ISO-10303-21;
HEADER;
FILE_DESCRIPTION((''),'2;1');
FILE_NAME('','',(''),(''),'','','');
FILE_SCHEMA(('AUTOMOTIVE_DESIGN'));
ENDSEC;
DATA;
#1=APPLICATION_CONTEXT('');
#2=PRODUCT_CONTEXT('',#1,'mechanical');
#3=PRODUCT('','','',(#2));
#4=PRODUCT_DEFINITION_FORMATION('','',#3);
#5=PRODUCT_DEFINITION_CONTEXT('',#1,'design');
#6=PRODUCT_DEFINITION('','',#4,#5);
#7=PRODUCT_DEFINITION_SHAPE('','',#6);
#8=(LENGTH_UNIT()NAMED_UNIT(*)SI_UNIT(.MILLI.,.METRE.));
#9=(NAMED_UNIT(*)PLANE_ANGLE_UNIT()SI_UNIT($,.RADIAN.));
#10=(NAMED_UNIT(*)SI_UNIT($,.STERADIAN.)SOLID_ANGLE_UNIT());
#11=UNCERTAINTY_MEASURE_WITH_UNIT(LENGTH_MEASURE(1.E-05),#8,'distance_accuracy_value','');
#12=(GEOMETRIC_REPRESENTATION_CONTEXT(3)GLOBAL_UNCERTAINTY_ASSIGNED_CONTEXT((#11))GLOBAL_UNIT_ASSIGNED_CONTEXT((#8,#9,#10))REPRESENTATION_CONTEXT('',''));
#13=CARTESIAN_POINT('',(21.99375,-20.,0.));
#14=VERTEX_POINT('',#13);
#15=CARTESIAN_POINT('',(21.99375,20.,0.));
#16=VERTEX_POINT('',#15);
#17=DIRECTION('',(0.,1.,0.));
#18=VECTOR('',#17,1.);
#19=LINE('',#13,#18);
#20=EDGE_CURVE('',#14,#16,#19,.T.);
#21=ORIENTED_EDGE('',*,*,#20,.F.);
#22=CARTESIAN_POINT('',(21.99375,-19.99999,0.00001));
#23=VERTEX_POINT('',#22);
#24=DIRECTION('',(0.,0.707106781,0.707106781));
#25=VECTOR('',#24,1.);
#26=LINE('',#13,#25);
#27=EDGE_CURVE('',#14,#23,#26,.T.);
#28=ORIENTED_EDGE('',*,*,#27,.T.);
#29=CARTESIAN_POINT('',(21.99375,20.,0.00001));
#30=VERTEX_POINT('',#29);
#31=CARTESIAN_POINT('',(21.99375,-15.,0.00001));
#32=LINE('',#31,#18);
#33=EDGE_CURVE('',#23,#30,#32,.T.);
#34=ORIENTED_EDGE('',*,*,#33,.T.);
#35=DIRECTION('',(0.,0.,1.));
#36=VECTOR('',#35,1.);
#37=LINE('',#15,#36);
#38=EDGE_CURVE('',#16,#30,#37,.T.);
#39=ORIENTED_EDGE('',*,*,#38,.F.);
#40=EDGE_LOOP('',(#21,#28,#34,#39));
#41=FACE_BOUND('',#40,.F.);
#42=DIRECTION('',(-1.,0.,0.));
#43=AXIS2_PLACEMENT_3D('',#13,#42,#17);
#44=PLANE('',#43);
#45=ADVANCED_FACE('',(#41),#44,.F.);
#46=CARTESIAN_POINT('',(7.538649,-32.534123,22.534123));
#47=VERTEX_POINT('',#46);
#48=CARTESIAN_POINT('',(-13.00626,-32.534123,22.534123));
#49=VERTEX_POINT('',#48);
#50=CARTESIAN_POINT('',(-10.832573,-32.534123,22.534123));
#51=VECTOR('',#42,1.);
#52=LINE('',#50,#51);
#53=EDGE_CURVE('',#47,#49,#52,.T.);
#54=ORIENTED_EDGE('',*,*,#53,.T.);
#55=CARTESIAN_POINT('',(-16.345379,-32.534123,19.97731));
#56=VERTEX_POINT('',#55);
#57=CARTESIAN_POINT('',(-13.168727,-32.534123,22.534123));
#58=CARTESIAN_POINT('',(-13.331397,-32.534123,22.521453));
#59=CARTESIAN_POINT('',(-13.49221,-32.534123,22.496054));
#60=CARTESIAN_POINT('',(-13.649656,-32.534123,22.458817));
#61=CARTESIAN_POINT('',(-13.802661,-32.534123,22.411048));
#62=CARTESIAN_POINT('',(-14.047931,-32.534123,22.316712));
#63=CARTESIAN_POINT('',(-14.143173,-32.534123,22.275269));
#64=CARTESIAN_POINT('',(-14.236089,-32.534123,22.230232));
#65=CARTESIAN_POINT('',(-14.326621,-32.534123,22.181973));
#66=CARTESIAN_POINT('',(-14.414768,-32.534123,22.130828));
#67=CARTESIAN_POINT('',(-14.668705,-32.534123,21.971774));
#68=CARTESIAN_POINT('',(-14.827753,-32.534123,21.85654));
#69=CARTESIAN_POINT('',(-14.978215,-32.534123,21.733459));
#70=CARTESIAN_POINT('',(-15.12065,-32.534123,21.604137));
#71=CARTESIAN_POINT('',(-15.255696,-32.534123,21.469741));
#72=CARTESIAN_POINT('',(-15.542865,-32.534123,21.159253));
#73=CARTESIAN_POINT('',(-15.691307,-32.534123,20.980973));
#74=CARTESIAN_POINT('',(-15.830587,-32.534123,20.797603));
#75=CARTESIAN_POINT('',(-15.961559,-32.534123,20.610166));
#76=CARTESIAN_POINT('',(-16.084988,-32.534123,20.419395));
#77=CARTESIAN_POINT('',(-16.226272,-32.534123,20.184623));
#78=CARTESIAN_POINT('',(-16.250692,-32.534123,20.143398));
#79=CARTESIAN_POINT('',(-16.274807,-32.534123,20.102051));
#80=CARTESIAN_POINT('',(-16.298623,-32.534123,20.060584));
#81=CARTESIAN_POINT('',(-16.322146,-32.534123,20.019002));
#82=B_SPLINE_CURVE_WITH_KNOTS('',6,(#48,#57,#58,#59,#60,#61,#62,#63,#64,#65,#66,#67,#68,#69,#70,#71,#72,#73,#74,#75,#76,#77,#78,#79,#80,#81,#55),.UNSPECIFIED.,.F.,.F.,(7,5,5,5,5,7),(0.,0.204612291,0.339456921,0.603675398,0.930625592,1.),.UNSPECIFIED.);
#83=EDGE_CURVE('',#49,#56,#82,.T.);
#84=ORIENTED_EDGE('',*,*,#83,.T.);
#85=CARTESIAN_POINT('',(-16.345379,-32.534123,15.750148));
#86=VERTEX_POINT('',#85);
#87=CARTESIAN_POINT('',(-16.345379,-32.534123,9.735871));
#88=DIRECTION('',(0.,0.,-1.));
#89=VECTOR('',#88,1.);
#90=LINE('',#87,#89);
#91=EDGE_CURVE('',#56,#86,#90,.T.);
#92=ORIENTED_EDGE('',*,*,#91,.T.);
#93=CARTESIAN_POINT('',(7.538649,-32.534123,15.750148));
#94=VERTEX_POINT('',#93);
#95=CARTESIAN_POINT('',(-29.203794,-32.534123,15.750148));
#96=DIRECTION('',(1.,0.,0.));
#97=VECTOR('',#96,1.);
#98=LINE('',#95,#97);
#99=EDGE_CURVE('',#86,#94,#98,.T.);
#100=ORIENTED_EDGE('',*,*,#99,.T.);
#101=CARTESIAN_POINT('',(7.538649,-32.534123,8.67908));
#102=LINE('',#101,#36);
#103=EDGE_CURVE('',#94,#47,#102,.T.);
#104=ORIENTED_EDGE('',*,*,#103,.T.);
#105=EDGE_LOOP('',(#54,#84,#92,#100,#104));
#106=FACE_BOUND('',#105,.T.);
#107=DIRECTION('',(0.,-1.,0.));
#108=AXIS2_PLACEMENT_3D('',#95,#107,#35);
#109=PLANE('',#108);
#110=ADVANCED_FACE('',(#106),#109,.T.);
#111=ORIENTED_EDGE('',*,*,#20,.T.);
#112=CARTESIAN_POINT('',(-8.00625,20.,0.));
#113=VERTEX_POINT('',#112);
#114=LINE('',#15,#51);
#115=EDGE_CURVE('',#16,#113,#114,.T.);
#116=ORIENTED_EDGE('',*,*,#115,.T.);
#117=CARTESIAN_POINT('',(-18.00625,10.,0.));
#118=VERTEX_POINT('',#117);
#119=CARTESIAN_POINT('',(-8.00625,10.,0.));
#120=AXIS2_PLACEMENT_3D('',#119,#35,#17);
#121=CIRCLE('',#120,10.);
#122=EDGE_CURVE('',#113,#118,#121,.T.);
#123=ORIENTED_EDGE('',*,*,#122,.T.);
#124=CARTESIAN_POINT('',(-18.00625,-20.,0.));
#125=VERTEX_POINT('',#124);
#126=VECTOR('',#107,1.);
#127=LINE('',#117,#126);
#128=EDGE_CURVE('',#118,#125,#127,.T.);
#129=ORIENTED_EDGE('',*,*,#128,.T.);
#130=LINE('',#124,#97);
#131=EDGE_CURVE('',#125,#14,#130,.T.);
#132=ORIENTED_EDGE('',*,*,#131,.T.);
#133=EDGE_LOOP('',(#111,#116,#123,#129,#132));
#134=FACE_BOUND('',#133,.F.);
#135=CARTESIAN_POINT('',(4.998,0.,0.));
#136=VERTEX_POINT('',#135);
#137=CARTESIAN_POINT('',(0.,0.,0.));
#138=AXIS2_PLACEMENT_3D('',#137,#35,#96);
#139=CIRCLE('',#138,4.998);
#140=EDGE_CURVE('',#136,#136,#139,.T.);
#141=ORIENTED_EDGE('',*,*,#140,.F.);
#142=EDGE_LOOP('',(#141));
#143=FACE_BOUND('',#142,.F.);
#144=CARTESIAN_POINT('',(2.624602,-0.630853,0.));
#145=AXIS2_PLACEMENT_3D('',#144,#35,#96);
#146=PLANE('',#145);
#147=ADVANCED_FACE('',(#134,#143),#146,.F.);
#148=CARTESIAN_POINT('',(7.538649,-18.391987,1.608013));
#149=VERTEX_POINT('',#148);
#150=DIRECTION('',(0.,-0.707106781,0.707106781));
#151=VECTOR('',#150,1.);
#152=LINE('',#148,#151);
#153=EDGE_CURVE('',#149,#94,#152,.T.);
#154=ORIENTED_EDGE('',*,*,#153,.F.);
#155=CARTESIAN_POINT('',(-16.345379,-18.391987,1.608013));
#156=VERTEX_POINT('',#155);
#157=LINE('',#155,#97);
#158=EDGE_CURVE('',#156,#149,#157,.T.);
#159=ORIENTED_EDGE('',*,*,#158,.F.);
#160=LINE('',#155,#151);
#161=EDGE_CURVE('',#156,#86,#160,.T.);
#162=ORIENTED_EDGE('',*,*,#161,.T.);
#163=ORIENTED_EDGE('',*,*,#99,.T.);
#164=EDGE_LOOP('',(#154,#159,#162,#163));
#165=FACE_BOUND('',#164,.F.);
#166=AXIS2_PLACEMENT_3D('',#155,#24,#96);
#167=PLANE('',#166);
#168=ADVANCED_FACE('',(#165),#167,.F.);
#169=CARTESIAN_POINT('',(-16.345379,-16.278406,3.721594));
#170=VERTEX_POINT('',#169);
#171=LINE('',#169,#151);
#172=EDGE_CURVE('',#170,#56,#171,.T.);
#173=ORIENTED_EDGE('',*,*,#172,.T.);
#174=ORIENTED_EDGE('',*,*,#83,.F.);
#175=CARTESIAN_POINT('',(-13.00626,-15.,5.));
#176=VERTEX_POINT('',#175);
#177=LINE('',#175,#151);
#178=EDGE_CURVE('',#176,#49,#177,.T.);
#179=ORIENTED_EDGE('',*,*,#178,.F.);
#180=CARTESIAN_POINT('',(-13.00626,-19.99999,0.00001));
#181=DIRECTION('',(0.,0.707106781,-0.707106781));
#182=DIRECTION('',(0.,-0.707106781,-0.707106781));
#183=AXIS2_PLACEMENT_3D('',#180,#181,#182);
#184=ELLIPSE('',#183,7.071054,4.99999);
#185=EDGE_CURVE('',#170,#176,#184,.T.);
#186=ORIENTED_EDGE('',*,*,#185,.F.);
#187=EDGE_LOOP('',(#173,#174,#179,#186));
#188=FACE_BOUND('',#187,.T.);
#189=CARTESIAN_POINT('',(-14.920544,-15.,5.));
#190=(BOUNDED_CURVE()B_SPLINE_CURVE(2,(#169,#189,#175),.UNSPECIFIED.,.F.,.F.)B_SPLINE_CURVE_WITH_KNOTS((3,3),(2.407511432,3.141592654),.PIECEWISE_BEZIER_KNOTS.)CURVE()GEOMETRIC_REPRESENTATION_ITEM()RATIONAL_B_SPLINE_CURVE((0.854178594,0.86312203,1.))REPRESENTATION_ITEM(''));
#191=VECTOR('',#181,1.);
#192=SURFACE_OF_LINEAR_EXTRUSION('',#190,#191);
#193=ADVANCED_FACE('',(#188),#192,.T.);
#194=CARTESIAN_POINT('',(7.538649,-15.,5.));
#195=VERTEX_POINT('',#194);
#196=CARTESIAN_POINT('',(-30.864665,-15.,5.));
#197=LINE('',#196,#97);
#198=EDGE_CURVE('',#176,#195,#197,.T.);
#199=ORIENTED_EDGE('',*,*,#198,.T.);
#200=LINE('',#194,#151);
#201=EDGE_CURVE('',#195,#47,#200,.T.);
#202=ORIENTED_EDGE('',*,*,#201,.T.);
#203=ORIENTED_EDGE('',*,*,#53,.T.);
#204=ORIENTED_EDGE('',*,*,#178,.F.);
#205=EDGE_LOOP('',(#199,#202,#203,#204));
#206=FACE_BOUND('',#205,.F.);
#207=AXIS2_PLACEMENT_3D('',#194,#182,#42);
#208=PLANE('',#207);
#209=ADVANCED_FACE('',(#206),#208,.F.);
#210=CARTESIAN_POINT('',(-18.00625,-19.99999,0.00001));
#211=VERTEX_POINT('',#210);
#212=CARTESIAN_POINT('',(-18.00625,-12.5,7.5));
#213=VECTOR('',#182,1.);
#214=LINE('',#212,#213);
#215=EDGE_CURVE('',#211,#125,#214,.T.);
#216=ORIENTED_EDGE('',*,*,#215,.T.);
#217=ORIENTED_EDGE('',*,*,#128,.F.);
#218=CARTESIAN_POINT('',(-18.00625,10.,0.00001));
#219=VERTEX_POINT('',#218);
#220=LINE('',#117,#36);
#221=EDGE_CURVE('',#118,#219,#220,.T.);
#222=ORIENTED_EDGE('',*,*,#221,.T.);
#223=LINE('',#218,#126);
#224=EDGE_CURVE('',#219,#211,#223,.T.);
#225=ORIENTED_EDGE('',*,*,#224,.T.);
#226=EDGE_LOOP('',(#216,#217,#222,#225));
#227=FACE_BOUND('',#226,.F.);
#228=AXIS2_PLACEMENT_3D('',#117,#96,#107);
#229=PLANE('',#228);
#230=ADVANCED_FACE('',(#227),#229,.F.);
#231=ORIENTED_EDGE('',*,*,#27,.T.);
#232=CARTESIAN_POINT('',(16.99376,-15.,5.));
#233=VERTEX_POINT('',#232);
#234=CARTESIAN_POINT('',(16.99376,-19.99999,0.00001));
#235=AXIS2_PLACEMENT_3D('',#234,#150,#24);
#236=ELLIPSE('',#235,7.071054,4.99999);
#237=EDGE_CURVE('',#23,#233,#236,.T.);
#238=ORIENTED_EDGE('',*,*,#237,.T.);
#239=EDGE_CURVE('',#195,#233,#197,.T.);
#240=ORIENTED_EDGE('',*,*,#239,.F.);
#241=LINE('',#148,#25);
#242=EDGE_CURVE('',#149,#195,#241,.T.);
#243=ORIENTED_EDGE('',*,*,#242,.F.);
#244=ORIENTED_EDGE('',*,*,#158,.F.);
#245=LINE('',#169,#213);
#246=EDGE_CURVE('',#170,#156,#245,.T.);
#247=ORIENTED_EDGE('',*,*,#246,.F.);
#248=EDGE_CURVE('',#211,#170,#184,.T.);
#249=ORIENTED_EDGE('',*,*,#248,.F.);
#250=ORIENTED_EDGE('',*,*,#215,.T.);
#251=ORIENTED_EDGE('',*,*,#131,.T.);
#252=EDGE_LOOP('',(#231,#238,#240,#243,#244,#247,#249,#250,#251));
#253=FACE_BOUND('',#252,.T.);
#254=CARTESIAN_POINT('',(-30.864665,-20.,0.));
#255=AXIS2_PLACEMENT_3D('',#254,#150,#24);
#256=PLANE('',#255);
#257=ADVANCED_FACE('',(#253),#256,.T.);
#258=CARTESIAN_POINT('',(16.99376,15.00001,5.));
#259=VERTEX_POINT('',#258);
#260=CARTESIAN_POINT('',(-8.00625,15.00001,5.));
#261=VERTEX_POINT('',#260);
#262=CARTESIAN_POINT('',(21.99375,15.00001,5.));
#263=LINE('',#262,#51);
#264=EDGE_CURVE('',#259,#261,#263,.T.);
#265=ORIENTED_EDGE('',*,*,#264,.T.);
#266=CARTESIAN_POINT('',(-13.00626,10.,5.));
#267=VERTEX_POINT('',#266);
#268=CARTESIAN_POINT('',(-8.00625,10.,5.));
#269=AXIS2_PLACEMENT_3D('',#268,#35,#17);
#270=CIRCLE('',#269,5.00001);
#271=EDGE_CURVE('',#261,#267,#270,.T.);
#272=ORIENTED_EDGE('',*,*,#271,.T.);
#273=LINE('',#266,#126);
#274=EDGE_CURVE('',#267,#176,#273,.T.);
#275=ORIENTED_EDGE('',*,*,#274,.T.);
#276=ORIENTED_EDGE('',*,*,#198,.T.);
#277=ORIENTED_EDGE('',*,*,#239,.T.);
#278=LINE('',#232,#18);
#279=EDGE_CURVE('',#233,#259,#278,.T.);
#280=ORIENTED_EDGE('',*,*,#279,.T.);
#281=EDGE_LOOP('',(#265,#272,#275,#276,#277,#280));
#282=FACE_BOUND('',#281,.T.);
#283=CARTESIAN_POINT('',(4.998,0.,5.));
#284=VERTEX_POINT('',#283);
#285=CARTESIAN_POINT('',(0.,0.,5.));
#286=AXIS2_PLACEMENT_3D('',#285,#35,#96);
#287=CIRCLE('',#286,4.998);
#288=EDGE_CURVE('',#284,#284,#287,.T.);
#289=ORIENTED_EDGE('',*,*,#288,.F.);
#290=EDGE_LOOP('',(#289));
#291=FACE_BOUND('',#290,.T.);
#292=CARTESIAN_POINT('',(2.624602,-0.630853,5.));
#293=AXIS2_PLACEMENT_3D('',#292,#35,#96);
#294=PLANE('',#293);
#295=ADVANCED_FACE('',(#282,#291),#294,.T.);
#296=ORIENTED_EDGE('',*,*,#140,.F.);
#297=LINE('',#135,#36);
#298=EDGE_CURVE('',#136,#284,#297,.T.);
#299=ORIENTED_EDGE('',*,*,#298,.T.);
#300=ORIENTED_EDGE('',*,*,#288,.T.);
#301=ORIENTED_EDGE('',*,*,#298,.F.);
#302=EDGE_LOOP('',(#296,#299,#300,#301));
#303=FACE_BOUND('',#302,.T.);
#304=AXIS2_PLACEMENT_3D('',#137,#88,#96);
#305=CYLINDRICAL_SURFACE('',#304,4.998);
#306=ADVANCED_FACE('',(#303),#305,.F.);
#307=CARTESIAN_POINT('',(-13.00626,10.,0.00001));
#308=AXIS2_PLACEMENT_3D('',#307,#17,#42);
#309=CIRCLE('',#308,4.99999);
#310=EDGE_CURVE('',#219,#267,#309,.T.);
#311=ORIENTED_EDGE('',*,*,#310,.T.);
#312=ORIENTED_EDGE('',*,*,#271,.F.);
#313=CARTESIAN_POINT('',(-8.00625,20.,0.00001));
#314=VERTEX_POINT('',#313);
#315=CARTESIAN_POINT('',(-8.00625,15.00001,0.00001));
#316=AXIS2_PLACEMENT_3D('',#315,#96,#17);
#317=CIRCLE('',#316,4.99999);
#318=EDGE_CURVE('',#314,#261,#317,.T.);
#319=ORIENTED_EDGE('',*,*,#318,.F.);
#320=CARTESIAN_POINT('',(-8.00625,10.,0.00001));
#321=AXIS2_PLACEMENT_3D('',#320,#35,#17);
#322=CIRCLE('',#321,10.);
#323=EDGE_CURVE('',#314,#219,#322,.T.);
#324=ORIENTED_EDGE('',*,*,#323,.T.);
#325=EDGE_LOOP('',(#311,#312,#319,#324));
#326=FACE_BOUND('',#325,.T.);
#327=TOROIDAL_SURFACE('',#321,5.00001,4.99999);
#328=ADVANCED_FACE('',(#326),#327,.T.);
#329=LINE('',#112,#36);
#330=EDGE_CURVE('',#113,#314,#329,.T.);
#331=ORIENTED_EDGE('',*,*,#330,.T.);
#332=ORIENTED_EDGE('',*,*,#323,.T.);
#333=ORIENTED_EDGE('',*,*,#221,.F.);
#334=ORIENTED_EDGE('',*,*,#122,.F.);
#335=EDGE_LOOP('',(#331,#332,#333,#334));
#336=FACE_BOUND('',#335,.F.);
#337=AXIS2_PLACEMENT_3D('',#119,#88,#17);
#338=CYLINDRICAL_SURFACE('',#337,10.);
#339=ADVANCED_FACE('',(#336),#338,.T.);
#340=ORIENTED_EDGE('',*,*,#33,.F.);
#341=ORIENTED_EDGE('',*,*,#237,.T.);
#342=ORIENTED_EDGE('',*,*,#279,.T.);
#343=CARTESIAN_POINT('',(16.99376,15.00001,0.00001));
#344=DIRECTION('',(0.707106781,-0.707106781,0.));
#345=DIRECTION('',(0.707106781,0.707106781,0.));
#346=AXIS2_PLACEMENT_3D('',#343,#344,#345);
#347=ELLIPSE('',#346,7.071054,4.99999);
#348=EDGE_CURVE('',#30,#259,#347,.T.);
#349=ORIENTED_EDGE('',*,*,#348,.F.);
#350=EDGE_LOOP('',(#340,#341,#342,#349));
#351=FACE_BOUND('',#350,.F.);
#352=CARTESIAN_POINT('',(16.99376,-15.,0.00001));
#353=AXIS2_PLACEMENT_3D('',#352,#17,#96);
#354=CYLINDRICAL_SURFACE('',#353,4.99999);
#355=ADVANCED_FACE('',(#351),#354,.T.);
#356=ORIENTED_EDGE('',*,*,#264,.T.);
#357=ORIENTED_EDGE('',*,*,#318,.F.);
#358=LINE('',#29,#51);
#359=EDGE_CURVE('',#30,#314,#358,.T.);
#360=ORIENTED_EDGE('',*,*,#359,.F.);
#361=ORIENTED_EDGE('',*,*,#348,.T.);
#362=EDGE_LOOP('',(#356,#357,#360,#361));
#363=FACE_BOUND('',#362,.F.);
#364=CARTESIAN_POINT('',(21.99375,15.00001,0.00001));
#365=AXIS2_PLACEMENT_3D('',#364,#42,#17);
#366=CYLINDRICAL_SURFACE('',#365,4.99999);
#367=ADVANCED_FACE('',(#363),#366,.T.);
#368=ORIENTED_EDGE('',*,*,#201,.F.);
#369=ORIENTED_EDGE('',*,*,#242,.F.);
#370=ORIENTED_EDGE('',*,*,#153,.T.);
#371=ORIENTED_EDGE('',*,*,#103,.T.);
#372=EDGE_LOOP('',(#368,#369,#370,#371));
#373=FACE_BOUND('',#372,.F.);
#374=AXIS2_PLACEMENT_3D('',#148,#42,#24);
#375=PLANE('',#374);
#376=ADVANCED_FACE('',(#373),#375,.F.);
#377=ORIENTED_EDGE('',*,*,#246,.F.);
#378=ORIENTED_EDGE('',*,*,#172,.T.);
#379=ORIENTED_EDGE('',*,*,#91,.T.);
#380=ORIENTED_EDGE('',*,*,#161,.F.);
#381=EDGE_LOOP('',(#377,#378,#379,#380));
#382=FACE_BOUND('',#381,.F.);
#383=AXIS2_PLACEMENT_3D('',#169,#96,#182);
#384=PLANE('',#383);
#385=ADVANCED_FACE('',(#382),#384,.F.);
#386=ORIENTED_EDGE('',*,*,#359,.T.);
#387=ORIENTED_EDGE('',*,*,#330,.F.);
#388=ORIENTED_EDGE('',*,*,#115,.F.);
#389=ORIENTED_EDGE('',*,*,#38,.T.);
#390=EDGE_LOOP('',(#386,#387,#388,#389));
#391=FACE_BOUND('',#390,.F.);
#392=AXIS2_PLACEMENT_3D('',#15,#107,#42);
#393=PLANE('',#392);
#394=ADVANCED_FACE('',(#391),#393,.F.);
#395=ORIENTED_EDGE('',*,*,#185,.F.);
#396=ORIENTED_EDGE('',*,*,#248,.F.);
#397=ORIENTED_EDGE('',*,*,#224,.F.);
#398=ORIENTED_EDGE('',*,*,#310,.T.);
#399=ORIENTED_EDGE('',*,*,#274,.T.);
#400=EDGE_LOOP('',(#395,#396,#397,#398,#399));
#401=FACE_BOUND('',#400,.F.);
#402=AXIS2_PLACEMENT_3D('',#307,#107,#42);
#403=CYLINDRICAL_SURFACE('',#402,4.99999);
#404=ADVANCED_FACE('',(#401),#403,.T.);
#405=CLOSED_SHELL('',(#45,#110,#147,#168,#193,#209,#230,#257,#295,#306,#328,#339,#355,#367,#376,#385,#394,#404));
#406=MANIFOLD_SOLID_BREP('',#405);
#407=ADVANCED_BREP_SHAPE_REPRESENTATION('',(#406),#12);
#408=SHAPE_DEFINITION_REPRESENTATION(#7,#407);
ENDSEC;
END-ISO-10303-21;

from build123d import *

# Parameters (mm, degrees)
F0_R        = 4.998
F1_DEPTH    = 5
F2_T1_DEPTH = 65.7168298797
F4_R        = 4.99999
F6_DEPTH    = 25
F7_T1_DEPTH = 49.600858076


# Not quite as in the source:
# - a fillet or chamfer that OpenCascade refuses, or shapes differently, is made with other operations: its cross-section is extruded or revolved along the edge and cut away or added
# - a fillet or chamfer is up to 0.001 mm smaller than in the source, because OpenCascade refuses the exact size
# - a feature of the source that left no trace in its solid (it failed there, or was rolled back) is left out


with BuildPart() as f1:
    # F0 (on Top) → F1 (new body)
    with BuildSketch(Plane.XY):
        with BuildLine():
            Line((-18.0062504657, -20), (21.9937495343, -20))
            Line((21.9937495343, -20), (21.9937495343, 20))
            Line((21.9937495343, 20), (-8.0062504657, 20))
            ThreePointArc((-8.0062504657, 20), (-15.0773182775, 17.0710678119), (-18.0062504657, 10))
            Line((-18.0062504657, 10), (-18.0062504657, -20))
        make_face()
        Circle(F0_R, mode=Mode.SUBTRACT)
    extrude(amount=F1_DEPTH)

    # F2: chamfer of 5 on 1 edges, made by hand

    # F2_s2 → F2_t1 (cut)
    with BuildSketch(Plane.YZ.offset(-30.8646654055)):
        Polygon((-20, 0), (-15, 5), (-20, 5), align=None)
    extrude(amount=F2_T1_DEPTH, mode=Mode.SUBTRACT)

    # F4 (radius 5 in the source; OpenCascade refuses exactly that, so slightly less here)
    f4_edges = [f1.edges().sort_by_distance(p)[0] for p in [
        (21.99375, 2.5, 5),
        (-18.00625, -2.5, 5),
        (-15.077318, 17.071068, 5),
        (6.99375, 20, 5),
    ]]
    fillet(f4_edges, radius=F4_R)

    # F5 (on face) → F6 (join)
    with BuildSketch(Plane(origin=(0, -10, 10), x_dir=(1, 0, 0), z_dir=(0, -0.7071067812, 0.7071067812))):
        with BuildLine():
            Line((-16.3453794084, -11.8680624291), (7.5386487879, -11.8680624291))
            Line((7.5386487879, -11.8680624291), (7.5386487879, -7.0710678119))
            Line((7.5386487879, -7.0710678119), (-13.0062604657, -7.0710678119))
            add(Edge.make_bspline(
                [(-16.3453794084, -8.8790074441), (-14.9205436029, -7.0710678119), (-13.0062604657, -7.0710678119)],
                knots=[2.4075114321, 2.4075114321, 2.4075114321, 3.1415926536, 3.1415926536, 3.1415926536], degree=2, weights=[0.8541785937, 0.8631220304, 1]))
            Line((-16.3453794084, -8.8790074441), (-16.3453794084, -11.8680624291))
        make_face()
    extrude(amount=F6_DEPTH)

    # F7: chamfer of 5 on 1 edges, made by hand

    # F7_s2 → F7_t1 (cut)
    with BuildSketch(Plane.YZ.offset(-29.2037943483)):
        Polygon((-32.5341230469, 15.7501482005), (-32.5341230469, 22.8212160124), (-36.0696569528, 19.2856821065), align=None)
    extrude(amount=F7_T1_DEPTH, mode=Mode.SUBTRACT)


solid = f1.part
